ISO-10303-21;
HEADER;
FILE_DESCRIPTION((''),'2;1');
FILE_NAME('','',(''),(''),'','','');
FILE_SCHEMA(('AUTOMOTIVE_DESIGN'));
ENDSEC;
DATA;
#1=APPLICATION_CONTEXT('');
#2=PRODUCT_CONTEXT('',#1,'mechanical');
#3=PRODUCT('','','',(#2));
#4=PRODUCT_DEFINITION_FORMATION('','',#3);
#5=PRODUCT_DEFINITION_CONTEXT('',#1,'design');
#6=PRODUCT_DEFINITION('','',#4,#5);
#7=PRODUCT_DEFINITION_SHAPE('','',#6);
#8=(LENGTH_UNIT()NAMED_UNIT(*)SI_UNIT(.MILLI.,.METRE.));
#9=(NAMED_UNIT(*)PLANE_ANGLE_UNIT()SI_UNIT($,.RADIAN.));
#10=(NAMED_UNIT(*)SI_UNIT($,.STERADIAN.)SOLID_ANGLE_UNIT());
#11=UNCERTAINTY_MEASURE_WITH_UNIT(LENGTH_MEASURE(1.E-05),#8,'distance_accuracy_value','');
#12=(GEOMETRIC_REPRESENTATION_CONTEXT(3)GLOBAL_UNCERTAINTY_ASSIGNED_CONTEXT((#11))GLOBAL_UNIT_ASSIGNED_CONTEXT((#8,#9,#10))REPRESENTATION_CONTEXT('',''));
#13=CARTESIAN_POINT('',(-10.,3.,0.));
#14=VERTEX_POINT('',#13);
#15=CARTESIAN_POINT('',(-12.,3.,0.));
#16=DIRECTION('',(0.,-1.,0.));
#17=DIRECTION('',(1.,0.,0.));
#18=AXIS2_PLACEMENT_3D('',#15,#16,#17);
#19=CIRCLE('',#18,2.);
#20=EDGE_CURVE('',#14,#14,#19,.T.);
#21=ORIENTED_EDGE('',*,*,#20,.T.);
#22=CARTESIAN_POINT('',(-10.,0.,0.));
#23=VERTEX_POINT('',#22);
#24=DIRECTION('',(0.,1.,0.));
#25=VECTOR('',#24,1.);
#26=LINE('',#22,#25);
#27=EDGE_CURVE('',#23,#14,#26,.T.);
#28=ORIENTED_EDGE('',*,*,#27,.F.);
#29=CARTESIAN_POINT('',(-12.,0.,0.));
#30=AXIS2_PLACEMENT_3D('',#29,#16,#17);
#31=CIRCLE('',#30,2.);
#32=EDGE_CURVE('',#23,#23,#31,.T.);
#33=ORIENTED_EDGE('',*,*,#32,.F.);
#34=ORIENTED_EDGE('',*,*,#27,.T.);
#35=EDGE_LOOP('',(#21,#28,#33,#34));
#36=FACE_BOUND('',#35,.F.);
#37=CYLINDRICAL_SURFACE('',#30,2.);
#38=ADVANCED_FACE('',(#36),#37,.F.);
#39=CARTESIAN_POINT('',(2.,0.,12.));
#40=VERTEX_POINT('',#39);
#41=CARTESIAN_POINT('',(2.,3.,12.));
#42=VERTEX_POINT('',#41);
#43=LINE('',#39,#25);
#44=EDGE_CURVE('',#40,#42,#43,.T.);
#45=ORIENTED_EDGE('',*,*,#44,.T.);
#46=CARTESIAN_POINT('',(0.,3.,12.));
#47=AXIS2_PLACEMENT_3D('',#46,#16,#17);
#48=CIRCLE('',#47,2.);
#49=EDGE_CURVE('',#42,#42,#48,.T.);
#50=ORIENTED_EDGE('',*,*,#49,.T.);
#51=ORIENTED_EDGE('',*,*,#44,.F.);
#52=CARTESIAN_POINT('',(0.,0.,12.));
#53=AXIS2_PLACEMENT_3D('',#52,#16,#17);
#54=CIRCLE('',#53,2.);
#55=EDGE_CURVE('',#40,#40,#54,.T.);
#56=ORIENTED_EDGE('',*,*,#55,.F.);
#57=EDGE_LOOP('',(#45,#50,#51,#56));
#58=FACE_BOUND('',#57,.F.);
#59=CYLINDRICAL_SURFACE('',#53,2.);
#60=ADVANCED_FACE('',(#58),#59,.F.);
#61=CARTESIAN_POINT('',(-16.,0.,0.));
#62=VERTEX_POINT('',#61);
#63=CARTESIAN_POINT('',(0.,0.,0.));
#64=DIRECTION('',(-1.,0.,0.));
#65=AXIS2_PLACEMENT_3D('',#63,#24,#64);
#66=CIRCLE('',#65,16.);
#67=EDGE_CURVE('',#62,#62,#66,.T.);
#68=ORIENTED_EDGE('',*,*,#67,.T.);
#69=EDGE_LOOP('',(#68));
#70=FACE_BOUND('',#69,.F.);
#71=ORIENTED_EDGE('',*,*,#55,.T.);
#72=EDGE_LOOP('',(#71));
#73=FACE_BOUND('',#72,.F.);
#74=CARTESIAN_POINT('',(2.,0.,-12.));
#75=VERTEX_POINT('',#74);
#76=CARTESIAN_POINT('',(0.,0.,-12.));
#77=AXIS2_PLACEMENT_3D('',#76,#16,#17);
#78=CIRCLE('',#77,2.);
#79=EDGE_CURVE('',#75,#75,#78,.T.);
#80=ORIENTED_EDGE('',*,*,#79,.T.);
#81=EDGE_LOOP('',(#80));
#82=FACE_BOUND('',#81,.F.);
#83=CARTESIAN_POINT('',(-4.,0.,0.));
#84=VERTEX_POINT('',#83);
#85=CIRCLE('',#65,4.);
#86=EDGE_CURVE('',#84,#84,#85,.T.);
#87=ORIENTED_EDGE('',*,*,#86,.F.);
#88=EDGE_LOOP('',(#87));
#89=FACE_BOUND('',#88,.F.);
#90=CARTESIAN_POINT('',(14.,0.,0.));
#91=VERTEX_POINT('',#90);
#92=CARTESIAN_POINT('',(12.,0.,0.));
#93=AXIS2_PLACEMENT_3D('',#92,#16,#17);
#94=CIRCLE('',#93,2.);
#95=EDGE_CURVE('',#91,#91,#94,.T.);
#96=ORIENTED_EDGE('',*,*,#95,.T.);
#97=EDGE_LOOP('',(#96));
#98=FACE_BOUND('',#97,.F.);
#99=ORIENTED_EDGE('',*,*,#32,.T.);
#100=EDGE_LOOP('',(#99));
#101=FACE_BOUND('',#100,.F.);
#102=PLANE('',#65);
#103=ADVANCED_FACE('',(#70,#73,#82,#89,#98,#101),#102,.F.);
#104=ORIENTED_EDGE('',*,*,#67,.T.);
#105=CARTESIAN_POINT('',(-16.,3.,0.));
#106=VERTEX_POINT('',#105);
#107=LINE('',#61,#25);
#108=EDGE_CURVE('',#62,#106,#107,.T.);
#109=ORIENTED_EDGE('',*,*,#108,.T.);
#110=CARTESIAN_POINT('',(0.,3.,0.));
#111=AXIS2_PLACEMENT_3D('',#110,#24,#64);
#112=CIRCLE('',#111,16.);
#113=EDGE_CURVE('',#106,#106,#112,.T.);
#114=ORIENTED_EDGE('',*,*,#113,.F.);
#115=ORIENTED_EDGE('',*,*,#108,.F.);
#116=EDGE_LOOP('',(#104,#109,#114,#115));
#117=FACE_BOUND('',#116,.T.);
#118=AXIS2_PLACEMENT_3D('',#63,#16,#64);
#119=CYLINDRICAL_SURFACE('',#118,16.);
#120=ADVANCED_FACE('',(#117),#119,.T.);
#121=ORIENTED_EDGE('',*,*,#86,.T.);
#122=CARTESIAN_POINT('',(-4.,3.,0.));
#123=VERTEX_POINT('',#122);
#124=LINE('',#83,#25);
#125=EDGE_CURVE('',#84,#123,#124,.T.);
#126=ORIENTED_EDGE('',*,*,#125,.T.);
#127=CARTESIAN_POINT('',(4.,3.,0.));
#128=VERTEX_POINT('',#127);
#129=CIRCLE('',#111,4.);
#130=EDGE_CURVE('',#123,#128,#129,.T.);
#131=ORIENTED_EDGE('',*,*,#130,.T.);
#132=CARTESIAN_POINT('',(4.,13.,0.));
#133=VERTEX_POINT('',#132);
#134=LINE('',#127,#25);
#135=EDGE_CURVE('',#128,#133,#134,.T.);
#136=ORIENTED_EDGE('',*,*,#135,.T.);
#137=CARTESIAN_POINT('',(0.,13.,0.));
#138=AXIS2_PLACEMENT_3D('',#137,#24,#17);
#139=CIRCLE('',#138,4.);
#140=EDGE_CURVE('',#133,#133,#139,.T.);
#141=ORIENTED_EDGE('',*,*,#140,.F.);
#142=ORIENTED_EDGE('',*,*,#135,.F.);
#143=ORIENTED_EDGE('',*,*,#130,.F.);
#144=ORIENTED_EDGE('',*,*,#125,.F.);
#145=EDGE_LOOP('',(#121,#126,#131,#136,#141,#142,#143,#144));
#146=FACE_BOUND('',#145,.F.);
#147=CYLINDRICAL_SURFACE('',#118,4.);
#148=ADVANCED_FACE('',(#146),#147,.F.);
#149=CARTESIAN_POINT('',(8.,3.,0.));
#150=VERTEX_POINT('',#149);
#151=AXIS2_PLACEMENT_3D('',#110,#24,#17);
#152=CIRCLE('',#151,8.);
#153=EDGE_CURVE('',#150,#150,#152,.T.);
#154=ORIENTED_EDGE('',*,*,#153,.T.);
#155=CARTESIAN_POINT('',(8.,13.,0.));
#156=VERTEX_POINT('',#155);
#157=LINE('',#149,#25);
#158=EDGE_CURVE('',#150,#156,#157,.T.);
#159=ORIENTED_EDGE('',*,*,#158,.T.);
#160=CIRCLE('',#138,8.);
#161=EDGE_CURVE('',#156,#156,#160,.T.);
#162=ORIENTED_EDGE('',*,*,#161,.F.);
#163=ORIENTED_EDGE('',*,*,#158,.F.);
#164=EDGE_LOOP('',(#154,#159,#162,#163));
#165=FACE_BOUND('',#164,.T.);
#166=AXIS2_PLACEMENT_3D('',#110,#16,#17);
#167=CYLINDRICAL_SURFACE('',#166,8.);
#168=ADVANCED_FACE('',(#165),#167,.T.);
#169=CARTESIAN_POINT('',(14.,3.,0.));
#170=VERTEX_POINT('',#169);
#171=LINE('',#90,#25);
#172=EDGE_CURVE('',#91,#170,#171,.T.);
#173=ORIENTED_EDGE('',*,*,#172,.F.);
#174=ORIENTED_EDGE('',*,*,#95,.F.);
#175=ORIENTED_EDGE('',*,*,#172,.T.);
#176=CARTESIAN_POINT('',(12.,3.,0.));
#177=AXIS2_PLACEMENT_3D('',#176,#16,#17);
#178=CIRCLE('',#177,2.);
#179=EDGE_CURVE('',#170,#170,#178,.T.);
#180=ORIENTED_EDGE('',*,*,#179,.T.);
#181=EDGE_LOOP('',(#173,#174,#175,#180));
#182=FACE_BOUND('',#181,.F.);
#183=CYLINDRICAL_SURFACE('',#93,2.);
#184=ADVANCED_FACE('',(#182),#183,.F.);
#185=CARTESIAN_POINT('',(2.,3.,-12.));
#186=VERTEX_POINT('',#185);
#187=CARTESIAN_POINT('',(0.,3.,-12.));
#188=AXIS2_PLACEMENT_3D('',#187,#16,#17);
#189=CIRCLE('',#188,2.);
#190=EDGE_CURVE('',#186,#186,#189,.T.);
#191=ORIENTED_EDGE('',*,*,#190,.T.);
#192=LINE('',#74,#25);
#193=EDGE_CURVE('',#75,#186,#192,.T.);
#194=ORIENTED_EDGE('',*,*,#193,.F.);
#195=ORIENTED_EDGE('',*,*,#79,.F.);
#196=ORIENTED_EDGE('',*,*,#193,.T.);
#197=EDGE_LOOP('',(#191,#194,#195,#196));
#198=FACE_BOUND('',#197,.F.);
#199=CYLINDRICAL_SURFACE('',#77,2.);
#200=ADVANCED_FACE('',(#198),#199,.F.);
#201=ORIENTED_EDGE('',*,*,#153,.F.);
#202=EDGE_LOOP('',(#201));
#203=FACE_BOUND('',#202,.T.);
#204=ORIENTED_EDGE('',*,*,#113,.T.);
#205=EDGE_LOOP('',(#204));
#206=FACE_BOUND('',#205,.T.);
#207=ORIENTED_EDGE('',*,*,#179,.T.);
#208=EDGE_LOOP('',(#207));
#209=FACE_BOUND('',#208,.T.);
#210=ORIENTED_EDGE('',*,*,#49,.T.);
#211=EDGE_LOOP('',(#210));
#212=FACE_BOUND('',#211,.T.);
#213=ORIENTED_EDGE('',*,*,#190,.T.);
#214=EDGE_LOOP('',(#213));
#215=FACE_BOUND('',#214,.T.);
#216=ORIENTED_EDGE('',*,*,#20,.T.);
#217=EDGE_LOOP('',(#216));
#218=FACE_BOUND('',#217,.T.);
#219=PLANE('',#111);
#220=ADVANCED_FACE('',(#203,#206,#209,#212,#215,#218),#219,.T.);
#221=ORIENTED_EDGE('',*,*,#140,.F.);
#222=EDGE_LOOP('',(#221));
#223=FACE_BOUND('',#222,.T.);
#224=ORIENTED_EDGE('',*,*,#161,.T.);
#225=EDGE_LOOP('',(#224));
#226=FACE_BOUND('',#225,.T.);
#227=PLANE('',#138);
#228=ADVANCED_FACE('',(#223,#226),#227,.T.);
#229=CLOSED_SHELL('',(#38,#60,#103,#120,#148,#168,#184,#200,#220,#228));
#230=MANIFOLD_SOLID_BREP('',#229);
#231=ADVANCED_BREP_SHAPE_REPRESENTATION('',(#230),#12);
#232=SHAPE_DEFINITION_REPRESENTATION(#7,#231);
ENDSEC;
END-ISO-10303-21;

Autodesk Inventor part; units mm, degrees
ref_plane "YZ Plane" through (0, 0, 0) normal (1, 0, 0) x (0, 1, 0)
ref_plane "XZ Plane" through (0, 0, 0) normal (0, 1, 0) x (-1, 0, 0)
ref_plane "XY Plane" through (0, 0, 0) normal (0, 0, 1) x (1, 0, 0)
sketch "Sketch1" plane through (0, 0, 0) normal (0, 1, 0) x (-1, 0, 0)
  circle A0 centre (0, 0) radius 16
  circle A1 centre (0, 0) radius 4
  dimension "d0" = 32
  dimension "d1" = 8
extrude "Extrusion1" add sketch "Sketch1" along normal blind 3
sketch "Sketch2" plane through (0, 3, 0) normal (0, 1, 0) x (1, 0, 0)
  circle A0 centre (0, 0) radius 8
  circle A1 centre (0, 0) radius 4
  dimension "d4" = 16
  dimension "d5" = 8
extrude "Extrusion2" add sketch "Sketch2" along normal blind 10
sketch "Sketch3" plane through (0, 0, 0) normal (0, -1, 0) x (1, 0, 0)
  circle A0 centre (-12, 0) radius 2
  circle A1 centre (0, -12) radius 2
  circle A2 centre (12, 0) radius 2
  circle A3 centre (0, 12) radius 2
  point P0 (0, 0)
  dimension "d8" = 4
  dimension "d11" = 360
  dimension "d13" = 12
extrude "Extrusion3" cut sketch "Sketch3" against normal blind 3
properties part number "SoporteEjePlato"
